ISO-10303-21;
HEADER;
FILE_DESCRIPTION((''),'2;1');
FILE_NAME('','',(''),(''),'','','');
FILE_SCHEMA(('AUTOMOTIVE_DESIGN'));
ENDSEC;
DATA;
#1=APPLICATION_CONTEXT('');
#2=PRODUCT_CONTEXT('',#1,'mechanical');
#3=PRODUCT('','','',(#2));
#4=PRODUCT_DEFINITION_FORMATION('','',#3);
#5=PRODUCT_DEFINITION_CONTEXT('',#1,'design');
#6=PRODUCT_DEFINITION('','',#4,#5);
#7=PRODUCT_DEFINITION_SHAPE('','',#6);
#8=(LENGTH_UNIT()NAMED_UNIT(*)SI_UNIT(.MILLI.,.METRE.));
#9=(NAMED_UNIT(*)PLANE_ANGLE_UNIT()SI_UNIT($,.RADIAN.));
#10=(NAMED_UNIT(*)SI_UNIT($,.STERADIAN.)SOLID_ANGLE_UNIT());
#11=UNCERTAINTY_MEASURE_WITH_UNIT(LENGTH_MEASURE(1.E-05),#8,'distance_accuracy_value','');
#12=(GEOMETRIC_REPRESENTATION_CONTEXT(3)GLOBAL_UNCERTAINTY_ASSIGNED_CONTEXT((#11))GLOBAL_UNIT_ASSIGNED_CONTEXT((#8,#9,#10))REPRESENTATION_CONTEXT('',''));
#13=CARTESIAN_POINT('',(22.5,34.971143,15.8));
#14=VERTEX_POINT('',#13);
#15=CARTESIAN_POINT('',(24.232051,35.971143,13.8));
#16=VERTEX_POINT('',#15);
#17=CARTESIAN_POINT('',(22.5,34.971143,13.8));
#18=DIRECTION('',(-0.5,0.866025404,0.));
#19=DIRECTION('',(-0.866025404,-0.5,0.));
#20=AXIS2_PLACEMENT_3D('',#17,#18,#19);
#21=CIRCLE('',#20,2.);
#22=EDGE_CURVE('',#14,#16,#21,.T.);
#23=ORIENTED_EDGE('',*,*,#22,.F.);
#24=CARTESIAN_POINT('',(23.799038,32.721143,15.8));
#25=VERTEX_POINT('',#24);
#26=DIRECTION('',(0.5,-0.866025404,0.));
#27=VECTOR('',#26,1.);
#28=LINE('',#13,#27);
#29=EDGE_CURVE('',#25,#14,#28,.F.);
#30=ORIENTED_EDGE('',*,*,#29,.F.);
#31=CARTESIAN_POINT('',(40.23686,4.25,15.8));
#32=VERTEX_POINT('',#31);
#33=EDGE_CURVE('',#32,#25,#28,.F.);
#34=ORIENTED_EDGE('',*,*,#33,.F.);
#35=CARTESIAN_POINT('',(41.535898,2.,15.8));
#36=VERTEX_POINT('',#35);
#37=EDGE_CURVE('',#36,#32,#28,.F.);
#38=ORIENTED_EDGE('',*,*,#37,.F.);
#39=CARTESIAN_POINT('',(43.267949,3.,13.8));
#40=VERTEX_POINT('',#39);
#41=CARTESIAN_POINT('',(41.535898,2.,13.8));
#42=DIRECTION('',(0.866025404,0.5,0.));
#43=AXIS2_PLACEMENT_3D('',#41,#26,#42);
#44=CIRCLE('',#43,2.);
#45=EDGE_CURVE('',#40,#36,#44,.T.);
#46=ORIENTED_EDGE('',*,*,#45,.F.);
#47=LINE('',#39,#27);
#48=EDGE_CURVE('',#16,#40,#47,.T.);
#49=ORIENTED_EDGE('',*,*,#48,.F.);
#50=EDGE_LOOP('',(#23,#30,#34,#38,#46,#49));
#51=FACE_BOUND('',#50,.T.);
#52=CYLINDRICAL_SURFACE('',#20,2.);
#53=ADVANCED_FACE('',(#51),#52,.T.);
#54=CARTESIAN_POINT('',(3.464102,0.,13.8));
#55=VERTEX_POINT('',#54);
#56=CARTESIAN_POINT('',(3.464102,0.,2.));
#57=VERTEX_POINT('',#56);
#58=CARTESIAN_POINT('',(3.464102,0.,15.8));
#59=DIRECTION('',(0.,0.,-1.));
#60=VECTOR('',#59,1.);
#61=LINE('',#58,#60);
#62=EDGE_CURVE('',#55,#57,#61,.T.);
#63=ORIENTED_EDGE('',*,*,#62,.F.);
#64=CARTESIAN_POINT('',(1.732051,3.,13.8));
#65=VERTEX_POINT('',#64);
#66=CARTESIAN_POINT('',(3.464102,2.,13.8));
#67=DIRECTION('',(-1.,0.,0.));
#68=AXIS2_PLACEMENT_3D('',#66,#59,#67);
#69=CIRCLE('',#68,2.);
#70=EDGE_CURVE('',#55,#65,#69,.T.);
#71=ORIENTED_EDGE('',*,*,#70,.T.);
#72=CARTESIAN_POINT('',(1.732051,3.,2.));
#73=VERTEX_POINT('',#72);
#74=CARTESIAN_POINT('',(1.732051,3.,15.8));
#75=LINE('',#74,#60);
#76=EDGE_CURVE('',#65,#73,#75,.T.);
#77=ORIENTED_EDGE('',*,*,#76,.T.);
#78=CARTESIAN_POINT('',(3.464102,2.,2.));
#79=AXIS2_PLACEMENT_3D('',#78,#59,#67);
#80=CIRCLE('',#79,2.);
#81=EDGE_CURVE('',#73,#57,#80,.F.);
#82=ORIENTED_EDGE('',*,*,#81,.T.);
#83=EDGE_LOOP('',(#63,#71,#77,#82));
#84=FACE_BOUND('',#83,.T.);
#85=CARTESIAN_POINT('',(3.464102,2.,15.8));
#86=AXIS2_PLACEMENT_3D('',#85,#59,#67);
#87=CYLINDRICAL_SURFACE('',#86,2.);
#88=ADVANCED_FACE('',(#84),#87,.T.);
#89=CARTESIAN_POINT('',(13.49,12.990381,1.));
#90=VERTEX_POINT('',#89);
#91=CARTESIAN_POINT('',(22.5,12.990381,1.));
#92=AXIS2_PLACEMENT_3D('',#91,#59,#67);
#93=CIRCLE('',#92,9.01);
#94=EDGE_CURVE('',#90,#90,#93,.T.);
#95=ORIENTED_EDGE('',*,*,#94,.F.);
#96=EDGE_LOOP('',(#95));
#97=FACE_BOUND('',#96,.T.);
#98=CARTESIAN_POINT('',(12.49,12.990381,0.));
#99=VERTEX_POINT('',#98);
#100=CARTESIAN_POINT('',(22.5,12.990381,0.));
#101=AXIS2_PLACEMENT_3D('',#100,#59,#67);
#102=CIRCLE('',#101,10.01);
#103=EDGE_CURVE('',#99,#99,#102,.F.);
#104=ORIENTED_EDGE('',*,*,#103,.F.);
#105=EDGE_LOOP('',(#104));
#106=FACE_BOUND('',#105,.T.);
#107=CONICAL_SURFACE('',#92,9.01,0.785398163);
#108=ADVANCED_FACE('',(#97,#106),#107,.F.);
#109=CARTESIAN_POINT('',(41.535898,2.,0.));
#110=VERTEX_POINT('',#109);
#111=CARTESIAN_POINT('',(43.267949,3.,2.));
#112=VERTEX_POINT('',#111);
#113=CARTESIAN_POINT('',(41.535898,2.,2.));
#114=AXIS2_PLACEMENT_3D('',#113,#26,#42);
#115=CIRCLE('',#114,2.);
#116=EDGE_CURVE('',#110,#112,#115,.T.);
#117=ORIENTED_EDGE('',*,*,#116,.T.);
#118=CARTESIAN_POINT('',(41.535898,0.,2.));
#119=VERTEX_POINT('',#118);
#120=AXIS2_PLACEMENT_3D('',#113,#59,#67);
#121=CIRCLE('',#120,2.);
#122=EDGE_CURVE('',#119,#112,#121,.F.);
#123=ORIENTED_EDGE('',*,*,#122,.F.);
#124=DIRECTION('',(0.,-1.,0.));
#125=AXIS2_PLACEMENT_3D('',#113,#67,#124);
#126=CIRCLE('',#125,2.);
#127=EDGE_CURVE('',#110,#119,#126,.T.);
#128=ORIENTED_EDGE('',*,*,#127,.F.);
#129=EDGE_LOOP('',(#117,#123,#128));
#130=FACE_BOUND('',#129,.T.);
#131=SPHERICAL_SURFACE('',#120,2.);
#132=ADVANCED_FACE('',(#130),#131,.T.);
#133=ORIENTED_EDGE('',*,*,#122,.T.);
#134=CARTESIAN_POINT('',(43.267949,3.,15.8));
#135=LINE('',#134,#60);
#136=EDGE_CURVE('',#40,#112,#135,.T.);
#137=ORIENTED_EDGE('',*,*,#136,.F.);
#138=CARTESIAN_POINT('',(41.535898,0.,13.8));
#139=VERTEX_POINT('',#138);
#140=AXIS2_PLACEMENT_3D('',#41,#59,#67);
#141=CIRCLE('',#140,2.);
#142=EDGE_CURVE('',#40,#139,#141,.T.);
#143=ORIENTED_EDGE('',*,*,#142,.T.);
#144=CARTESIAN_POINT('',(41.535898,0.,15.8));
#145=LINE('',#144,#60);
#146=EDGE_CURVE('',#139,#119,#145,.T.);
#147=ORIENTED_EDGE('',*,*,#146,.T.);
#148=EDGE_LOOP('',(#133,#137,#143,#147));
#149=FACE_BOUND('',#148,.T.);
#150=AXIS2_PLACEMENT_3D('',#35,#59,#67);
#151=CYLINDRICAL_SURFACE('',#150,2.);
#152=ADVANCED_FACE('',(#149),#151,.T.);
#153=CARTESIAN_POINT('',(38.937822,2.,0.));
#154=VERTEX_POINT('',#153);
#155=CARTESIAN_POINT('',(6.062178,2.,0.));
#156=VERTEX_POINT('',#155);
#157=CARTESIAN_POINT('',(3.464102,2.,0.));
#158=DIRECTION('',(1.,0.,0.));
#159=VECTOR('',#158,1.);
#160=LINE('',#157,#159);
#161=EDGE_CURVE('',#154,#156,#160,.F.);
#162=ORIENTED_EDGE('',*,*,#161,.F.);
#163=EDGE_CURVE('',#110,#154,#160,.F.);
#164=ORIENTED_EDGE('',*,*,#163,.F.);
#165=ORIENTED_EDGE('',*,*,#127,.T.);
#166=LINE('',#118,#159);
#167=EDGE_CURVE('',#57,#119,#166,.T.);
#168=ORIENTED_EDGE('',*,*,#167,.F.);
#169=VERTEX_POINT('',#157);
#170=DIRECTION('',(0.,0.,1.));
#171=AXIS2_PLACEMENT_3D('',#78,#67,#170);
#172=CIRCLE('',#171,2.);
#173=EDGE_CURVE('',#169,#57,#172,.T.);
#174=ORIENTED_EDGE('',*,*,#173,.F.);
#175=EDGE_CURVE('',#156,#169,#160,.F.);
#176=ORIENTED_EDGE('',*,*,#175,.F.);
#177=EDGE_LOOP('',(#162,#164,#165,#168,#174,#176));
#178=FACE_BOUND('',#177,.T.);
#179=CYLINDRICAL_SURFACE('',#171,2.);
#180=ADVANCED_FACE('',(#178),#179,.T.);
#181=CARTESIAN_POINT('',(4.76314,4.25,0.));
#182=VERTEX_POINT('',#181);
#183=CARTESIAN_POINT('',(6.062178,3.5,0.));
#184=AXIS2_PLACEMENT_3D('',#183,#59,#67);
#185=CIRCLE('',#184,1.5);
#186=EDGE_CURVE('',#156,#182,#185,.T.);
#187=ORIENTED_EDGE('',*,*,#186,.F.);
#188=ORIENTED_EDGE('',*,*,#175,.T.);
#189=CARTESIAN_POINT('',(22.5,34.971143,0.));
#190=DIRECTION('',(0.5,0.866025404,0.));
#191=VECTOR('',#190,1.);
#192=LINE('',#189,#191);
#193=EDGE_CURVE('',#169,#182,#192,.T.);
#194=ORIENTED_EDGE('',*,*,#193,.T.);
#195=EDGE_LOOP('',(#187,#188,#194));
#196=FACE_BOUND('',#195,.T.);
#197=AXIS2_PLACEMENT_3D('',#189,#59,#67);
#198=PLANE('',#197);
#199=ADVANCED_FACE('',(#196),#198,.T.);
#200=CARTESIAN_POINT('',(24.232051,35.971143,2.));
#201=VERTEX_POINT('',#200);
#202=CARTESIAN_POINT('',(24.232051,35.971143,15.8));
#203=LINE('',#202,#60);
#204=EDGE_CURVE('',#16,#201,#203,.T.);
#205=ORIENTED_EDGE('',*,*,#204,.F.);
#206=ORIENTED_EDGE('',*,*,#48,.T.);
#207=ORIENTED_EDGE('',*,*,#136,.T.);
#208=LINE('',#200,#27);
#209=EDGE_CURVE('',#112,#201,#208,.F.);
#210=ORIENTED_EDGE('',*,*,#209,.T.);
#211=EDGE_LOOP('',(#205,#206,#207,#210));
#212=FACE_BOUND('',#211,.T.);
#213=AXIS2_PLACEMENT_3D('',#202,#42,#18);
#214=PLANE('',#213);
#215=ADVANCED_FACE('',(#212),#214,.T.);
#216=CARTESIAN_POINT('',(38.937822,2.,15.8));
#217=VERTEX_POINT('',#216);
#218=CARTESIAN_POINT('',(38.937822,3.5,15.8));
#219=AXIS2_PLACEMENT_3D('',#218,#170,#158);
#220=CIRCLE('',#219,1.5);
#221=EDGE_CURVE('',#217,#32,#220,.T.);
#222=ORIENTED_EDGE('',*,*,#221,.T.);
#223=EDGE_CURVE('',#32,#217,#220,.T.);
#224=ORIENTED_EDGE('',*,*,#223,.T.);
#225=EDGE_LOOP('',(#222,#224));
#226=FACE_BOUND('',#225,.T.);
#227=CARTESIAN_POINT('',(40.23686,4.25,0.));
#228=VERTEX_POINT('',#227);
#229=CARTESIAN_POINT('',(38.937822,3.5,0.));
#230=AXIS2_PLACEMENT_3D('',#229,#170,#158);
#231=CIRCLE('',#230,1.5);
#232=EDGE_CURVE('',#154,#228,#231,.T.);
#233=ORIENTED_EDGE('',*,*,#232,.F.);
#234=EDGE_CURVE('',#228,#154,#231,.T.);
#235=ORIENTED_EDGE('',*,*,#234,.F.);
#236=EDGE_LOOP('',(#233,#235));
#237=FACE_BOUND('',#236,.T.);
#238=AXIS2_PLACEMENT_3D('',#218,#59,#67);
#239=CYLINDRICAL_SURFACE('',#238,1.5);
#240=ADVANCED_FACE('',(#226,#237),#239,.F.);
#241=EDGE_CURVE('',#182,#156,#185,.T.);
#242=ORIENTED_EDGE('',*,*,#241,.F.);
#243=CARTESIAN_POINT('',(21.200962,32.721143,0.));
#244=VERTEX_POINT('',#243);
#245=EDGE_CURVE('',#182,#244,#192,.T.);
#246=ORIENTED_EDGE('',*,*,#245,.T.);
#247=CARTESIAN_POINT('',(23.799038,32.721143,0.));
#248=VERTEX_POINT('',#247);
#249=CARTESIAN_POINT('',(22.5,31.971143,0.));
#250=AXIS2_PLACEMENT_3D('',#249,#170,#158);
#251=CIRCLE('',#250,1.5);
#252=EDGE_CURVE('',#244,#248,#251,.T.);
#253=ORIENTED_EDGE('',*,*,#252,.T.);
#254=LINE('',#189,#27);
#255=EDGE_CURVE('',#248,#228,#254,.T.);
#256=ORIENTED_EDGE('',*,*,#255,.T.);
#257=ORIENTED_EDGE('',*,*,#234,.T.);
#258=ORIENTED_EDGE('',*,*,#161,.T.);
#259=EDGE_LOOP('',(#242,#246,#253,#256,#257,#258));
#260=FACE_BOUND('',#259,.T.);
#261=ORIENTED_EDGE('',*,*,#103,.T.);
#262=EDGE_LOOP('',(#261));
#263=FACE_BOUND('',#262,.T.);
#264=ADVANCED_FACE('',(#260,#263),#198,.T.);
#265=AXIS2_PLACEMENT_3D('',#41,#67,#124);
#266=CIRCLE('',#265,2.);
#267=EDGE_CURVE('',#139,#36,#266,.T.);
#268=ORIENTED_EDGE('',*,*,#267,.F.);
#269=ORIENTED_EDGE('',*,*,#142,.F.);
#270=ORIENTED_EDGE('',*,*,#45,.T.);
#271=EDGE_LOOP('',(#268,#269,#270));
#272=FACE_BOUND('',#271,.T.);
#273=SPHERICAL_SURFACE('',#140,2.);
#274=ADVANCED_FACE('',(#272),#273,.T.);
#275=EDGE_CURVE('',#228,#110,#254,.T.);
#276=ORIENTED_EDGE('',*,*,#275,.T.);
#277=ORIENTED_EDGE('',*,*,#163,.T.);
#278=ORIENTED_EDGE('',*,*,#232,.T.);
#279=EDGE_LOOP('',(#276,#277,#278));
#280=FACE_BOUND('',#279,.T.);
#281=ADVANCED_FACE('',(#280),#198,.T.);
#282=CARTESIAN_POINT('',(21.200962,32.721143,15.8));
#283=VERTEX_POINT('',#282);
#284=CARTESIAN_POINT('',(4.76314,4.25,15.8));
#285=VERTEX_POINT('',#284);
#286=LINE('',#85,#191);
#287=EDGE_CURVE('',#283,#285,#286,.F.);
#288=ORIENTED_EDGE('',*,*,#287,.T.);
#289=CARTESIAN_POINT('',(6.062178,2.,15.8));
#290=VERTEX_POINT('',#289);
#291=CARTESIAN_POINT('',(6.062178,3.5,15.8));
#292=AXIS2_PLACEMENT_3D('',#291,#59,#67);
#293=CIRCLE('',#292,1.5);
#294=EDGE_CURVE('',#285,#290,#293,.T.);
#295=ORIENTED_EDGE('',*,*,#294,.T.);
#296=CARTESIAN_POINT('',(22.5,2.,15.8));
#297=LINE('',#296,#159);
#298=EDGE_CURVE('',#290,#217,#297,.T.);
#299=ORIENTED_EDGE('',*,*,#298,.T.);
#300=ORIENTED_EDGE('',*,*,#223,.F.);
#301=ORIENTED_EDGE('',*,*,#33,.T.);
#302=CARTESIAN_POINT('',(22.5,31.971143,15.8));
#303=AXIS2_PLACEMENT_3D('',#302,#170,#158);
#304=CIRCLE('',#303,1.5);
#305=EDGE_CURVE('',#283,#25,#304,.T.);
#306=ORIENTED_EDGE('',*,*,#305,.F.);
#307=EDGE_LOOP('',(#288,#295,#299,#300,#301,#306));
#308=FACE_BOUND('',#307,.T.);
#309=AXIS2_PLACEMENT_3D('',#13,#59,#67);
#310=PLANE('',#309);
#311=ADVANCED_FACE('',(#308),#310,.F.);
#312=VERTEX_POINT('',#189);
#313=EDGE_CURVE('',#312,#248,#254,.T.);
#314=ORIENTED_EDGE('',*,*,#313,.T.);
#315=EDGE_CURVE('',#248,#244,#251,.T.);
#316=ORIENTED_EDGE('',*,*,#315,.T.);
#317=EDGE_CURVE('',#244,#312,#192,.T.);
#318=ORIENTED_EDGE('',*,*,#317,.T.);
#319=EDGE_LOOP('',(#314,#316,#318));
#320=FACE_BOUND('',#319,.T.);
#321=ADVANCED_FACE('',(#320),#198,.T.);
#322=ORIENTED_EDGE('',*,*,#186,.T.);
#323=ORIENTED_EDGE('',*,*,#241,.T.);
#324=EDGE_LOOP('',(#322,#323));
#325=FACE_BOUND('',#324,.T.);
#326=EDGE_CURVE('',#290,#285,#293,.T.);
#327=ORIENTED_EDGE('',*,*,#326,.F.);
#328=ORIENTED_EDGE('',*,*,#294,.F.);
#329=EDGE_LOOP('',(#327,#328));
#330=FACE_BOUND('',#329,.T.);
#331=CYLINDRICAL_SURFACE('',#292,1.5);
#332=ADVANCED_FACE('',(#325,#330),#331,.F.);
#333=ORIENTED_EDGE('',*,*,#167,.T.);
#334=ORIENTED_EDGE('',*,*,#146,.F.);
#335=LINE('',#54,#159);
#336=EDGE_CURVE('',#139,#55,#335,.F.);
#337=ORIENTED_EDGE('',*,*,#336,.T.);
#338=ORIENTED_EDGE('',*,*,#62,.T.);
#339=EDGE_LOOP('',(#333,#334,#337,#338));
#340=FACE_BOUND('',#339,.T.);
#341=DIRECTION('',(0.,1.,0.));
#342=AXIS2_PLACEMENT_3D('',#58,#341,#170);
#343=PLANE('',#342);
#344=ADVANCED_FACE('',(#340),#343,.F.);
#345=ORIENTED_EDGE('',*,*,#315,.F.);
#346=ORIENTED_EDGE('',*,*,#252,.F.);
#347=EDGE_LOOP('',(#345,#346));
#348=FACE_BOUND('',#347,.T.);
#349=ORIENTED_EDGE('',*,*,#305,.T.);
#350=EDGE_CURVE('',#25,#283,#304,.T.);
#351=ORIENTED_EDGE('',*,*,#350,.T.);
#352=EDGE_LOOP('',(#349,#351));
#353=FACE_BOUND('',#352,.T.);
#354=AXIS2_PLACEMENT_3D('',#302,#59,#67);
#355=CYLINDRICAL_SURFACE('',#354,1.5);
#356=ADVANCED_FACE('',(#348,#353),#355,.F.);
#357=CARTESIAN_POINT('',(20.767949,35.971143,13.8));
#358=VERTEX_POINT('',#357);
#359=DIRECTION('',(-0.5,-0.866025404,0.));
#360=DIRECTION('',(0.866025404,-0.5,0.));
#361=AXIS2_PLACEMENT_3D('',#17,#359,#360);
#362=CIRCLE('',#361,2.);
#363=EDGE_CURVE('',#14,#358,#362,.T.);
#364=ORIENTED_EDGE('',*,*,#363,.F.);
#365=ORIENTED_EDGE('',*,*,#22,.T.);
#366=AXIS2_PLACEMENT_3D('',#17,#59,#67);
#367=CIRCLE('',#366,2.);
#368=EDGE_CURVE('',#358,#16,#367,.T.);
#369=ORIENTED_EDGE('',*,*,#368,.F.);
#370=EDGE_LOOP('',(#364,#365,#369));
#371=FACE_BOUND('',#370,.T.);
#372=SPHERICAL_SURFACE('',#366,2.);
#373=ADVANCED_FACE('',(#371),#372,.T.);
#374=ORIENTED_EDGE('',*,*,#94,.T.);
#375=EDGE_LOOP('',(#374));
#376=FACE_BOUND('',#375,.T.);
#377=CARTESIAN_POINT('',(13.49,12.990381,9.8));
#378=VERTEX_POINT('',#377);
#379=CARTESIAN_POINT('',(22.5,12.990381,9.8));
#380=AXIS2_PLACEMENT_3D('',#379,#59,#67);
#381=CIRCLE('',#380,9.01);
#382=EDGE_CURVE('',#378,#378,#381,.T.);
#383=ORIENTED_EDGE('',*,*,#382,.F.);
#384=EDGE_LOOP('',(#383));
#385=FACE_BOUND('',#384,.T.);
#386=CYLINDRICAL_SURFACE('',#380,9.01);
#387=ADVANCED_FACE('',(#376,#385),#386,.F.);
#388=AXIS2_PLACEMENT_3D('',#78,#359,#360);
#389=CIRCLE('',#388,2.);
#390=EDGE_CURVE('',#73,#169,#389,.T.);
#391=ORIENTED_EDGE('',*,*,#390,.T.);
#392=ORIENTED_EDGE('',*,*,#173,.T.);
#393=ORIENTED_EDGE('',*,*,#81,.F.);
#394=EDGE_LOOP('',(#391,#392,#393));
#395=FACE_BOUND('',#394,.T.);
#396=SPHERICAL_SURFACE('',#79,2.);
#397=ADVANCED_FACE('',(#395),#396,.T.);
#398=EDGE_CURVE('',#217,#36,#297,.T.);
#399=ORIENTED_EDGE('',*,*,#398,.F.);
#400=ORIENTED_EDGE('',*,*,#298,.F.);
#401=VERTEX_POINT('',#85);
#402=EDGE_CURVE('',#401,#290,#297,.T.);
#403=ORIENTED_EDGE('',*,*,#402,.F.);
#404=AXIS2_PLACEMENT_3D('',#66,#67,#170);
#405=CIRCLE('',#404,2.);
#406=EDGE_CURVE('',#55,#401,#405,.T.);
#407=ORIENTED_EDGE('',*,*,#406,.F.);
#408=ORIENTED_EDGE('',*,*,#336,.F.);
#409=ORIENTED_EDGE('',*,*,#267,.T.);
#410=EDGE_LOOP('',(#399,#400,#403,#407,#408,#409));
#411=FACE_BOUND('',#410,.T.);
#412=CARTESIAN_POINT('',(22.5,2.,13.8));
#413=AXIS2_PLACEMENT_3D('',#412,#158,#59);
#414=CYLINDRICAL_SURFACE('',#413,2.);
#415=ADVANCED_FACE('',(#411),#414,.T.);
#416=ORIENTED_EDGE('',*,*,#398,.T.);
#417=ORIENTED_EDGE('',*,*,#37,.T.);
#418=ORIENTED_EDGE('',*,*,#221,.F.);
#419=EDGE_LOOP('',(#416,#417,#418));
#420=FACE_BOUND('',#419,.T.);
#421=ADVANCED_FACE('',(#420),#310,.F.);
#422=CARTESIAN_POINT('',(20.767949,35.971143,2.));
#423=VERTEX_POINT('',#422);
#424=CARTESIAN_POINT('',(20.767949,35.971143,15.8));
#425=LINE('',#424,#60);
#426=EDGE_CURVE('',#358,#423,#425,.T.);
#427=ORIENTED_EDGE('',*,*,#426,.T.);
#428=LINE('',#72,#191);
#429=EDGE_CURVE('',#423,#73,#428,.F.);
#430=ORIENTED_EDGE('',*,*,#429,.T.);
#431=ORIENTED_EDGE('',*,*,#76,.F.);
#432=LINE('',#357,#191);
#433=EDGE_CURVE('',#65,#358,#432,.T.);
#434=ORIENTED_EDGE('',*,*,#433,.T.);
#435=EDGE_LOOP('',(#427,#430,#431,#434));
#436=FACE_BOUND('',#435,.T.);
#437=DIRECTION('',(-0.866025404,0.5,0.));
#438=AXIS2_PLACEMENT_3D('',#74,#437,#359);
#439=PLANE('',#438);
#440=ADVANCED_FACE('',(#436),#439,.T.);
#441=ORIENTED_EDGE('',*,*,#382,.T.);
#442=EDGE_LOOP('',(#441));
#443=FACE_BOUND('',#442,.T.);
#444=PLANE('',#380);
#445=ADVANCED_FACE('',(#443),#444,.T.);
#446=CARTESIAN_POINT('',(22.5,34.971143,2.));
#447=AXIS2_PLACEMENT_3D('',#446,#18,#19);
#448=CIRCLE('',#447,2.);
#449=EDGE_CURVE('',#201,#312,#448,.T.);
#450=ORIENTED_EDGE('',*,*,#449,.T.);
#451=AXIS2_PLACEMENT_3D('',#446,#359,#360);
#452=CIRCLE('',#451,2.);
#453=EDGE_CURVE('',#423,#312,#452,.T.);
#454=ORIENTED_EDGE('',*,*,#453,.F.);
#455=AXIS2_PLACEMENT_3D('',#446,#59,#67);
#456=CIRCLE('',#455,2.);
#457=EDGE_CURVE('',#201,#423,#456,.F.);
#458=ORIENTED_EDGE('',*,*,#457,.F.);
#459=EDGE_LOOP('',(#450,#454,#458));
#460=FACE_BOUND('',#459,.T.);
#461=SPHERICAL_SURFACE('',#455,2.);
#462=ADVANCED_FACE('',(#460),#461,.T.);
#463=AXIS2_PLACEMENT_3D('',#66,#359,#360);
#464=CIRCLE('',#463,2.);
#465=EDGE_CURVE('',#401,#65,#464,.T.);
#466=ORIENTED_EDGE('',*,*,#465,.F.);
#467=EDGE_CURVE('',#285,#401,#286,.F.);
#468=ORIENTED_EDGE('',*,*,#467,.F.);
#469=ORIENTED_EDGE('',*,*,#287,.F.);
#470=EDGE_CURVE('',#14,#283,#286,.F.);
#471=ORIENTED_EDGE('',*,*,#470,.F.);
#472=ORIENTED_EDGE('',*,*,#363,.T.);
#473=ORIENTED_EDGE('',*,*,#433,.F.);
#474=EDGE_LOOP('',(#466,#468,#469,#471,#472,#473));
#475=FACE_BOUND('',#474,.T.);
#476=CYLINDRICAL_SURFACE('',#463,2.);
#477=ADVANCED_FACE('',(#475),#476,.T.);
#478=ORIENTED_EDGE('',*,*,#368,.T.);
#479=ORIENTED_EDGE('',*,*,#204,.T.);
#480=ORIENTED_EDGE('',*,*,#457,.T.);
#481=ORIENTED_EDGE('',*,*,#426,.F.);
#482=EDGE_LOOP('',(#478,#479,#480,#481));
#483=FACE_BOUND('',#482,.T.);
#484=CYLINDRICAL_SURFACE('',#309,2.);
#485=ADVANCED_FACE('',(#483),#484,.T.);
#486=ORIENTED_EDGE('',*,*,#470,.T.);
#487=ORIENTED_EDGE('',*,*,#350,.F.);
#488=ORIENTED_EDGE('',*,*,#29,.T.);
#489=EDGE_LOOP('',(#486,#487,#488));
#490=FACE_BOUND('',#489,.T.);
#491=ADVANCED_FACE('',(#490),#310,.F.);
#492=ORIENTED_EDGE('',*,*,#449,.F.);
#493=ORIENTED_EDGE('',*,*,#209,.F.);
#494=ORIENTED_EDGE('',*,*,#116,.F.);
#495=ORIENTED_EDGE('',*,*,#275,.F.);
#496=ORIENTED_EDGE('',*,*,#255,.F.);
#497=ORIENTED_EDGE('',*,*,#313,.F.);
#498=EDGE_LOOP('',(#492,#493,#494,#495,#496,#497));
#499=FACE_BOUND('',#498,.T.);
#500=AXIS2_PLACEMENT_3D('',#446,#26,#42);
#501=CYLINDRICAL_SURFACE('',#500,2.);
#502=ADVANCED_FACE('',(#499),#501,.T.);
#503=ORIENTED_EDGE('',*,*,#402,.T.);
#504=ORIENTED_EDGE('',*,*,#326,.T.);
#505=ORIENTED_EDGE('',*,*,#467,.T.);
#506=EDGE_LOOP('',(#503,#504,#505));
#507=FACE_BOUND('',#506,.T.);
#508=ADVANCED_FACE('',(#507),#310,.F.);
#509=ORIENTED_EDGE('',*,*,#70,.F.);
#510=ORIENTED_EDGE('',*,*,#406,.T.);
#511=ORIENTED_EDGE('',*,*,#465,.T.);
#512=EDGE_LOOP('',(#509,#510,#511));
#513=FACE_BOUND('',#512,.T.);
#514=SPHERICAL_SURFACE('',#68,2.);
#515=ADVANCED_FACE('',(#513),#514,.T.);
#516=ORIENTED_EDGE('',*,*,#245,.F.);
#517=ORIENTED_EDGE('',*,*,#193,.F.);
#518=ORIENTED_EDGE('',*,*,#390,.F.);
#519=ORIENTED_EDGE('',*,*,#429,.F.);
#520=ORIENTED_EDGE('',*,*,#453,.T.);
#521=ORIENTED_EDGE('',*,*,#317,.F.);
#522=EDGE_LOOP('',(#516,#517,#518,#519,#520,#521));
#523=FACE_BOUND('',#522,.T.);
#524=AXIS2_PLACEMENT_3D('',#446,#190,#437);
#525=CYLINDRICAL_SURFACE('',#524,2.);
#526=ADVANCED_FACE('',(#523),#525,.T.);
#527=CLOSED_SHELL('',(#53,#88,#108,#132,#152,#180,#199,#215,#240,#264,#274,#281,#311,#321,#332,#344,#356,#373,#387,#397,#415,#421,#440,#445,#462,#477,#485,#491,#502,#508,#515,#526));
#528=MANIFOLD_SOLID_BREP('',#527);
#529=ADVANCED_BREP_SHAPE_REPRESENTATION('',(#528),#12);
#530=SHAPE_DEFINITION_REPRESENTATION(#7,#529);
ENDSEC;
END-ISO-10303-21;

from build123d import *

# Parameters (mm, degrees)
ESQUISSE1_R             = 1.5
BOSS_EXTRU_1_DEPTH      = 15.8
ESQUISSE2_R             = 9.01
ENL_V_MAT_EXTRU_1_DEPTH = 9.8
CHANFREIN1_SIZE         = 1
CONG_2_R                = 2


with BuildPart() as part:
    # Esquisse1 → Boss.-Extru.1 (new body)
    with BuildSketch(Plane.XY):
        with BuildLine():
            Line((1.732050808, 3), (20.767949192, 35.97114317))
            ThreePointArc((20.767949192, 35.97114317), (22.5, 36.97114317), (24.232050808, 35.97114317))
            Line((24.232050808, 35.97114317), (43.267949192, 3))
            ThreePointArc((43.267949192, 3), (43.267949192, 1), (41.535898385, 0))
            Line((41.535898385, 0), (3.464101615, 0))
            ThreePointArc((3.464101615, 0), (1.732050808, 1), (1.732050808, 3))
        make_face()
        with Locations((22.5, 31.97114317)):
            Circle(ESQUISSE1_R, mode=Mode.SUBTRACT)
        with Locations((38.937822174, 3.5)):
            Circle(ESQUISSE1_R, mode=Mode.SUBTRACT)
        with Locations(Location((6.062177826, 3.5, 0), (0, 0, 180))):
            Circle(ESQUISSE1_R, mode=Mode.SUBTRACT)
    extrude(amount=BOSS_EXTRU_1_DEPTH)

    # Esquisse2 → Enlèv. mat.-Extru.1 (cut)
    with BuildSketch(Plane(origin=(0, 0, 0), x_dir=(-1, 0, 0), z_dir=(0, 0, -1))):
        with Locations((-22.5, 12.990381057)):
            Circle(ESQUISSE2_R)
    extrude(amount=-ENL_V_MAT_EXTRU_1_DEPTH, mode=Mode.SUBTRACT)

    # Chanfrein1
    chanfrein1_edges = [part.edges().sort_by_distance(p)[0] for p in [
        (31.51, 12.990381057, 0),
    ]]
    chamfer(chanfrein1_edges, length=CHANFREIN1_SIZE)

    # Congé2
    cong_2_edges = [part.edges().sort_by_distance(p)[0] for p in [
        (43.267949192, 1, 15.8),
        (22.5, 0, 15.8),
        (1.732050808, 1, 15.8),
        (11.25, 19.485571585, 15.8),
        (22.5, 36.97114317, 15.8),
        (11.25, 19.485571585, 0),
        (1.732050808, 1, 0),
        (22.5, 0, 0),
        (43.267949192, 1, 0),
        (33.75, 19.485571585, 0),
        (22.5, 36.97114317, 0),
        (33.75, 19.485571585, 15.8),
    ]]
    fillet(cong_2_edges, radius=CONG_2_R - 0.0001)  # a hair under: the kernel refuses the full size


solid = part.part
